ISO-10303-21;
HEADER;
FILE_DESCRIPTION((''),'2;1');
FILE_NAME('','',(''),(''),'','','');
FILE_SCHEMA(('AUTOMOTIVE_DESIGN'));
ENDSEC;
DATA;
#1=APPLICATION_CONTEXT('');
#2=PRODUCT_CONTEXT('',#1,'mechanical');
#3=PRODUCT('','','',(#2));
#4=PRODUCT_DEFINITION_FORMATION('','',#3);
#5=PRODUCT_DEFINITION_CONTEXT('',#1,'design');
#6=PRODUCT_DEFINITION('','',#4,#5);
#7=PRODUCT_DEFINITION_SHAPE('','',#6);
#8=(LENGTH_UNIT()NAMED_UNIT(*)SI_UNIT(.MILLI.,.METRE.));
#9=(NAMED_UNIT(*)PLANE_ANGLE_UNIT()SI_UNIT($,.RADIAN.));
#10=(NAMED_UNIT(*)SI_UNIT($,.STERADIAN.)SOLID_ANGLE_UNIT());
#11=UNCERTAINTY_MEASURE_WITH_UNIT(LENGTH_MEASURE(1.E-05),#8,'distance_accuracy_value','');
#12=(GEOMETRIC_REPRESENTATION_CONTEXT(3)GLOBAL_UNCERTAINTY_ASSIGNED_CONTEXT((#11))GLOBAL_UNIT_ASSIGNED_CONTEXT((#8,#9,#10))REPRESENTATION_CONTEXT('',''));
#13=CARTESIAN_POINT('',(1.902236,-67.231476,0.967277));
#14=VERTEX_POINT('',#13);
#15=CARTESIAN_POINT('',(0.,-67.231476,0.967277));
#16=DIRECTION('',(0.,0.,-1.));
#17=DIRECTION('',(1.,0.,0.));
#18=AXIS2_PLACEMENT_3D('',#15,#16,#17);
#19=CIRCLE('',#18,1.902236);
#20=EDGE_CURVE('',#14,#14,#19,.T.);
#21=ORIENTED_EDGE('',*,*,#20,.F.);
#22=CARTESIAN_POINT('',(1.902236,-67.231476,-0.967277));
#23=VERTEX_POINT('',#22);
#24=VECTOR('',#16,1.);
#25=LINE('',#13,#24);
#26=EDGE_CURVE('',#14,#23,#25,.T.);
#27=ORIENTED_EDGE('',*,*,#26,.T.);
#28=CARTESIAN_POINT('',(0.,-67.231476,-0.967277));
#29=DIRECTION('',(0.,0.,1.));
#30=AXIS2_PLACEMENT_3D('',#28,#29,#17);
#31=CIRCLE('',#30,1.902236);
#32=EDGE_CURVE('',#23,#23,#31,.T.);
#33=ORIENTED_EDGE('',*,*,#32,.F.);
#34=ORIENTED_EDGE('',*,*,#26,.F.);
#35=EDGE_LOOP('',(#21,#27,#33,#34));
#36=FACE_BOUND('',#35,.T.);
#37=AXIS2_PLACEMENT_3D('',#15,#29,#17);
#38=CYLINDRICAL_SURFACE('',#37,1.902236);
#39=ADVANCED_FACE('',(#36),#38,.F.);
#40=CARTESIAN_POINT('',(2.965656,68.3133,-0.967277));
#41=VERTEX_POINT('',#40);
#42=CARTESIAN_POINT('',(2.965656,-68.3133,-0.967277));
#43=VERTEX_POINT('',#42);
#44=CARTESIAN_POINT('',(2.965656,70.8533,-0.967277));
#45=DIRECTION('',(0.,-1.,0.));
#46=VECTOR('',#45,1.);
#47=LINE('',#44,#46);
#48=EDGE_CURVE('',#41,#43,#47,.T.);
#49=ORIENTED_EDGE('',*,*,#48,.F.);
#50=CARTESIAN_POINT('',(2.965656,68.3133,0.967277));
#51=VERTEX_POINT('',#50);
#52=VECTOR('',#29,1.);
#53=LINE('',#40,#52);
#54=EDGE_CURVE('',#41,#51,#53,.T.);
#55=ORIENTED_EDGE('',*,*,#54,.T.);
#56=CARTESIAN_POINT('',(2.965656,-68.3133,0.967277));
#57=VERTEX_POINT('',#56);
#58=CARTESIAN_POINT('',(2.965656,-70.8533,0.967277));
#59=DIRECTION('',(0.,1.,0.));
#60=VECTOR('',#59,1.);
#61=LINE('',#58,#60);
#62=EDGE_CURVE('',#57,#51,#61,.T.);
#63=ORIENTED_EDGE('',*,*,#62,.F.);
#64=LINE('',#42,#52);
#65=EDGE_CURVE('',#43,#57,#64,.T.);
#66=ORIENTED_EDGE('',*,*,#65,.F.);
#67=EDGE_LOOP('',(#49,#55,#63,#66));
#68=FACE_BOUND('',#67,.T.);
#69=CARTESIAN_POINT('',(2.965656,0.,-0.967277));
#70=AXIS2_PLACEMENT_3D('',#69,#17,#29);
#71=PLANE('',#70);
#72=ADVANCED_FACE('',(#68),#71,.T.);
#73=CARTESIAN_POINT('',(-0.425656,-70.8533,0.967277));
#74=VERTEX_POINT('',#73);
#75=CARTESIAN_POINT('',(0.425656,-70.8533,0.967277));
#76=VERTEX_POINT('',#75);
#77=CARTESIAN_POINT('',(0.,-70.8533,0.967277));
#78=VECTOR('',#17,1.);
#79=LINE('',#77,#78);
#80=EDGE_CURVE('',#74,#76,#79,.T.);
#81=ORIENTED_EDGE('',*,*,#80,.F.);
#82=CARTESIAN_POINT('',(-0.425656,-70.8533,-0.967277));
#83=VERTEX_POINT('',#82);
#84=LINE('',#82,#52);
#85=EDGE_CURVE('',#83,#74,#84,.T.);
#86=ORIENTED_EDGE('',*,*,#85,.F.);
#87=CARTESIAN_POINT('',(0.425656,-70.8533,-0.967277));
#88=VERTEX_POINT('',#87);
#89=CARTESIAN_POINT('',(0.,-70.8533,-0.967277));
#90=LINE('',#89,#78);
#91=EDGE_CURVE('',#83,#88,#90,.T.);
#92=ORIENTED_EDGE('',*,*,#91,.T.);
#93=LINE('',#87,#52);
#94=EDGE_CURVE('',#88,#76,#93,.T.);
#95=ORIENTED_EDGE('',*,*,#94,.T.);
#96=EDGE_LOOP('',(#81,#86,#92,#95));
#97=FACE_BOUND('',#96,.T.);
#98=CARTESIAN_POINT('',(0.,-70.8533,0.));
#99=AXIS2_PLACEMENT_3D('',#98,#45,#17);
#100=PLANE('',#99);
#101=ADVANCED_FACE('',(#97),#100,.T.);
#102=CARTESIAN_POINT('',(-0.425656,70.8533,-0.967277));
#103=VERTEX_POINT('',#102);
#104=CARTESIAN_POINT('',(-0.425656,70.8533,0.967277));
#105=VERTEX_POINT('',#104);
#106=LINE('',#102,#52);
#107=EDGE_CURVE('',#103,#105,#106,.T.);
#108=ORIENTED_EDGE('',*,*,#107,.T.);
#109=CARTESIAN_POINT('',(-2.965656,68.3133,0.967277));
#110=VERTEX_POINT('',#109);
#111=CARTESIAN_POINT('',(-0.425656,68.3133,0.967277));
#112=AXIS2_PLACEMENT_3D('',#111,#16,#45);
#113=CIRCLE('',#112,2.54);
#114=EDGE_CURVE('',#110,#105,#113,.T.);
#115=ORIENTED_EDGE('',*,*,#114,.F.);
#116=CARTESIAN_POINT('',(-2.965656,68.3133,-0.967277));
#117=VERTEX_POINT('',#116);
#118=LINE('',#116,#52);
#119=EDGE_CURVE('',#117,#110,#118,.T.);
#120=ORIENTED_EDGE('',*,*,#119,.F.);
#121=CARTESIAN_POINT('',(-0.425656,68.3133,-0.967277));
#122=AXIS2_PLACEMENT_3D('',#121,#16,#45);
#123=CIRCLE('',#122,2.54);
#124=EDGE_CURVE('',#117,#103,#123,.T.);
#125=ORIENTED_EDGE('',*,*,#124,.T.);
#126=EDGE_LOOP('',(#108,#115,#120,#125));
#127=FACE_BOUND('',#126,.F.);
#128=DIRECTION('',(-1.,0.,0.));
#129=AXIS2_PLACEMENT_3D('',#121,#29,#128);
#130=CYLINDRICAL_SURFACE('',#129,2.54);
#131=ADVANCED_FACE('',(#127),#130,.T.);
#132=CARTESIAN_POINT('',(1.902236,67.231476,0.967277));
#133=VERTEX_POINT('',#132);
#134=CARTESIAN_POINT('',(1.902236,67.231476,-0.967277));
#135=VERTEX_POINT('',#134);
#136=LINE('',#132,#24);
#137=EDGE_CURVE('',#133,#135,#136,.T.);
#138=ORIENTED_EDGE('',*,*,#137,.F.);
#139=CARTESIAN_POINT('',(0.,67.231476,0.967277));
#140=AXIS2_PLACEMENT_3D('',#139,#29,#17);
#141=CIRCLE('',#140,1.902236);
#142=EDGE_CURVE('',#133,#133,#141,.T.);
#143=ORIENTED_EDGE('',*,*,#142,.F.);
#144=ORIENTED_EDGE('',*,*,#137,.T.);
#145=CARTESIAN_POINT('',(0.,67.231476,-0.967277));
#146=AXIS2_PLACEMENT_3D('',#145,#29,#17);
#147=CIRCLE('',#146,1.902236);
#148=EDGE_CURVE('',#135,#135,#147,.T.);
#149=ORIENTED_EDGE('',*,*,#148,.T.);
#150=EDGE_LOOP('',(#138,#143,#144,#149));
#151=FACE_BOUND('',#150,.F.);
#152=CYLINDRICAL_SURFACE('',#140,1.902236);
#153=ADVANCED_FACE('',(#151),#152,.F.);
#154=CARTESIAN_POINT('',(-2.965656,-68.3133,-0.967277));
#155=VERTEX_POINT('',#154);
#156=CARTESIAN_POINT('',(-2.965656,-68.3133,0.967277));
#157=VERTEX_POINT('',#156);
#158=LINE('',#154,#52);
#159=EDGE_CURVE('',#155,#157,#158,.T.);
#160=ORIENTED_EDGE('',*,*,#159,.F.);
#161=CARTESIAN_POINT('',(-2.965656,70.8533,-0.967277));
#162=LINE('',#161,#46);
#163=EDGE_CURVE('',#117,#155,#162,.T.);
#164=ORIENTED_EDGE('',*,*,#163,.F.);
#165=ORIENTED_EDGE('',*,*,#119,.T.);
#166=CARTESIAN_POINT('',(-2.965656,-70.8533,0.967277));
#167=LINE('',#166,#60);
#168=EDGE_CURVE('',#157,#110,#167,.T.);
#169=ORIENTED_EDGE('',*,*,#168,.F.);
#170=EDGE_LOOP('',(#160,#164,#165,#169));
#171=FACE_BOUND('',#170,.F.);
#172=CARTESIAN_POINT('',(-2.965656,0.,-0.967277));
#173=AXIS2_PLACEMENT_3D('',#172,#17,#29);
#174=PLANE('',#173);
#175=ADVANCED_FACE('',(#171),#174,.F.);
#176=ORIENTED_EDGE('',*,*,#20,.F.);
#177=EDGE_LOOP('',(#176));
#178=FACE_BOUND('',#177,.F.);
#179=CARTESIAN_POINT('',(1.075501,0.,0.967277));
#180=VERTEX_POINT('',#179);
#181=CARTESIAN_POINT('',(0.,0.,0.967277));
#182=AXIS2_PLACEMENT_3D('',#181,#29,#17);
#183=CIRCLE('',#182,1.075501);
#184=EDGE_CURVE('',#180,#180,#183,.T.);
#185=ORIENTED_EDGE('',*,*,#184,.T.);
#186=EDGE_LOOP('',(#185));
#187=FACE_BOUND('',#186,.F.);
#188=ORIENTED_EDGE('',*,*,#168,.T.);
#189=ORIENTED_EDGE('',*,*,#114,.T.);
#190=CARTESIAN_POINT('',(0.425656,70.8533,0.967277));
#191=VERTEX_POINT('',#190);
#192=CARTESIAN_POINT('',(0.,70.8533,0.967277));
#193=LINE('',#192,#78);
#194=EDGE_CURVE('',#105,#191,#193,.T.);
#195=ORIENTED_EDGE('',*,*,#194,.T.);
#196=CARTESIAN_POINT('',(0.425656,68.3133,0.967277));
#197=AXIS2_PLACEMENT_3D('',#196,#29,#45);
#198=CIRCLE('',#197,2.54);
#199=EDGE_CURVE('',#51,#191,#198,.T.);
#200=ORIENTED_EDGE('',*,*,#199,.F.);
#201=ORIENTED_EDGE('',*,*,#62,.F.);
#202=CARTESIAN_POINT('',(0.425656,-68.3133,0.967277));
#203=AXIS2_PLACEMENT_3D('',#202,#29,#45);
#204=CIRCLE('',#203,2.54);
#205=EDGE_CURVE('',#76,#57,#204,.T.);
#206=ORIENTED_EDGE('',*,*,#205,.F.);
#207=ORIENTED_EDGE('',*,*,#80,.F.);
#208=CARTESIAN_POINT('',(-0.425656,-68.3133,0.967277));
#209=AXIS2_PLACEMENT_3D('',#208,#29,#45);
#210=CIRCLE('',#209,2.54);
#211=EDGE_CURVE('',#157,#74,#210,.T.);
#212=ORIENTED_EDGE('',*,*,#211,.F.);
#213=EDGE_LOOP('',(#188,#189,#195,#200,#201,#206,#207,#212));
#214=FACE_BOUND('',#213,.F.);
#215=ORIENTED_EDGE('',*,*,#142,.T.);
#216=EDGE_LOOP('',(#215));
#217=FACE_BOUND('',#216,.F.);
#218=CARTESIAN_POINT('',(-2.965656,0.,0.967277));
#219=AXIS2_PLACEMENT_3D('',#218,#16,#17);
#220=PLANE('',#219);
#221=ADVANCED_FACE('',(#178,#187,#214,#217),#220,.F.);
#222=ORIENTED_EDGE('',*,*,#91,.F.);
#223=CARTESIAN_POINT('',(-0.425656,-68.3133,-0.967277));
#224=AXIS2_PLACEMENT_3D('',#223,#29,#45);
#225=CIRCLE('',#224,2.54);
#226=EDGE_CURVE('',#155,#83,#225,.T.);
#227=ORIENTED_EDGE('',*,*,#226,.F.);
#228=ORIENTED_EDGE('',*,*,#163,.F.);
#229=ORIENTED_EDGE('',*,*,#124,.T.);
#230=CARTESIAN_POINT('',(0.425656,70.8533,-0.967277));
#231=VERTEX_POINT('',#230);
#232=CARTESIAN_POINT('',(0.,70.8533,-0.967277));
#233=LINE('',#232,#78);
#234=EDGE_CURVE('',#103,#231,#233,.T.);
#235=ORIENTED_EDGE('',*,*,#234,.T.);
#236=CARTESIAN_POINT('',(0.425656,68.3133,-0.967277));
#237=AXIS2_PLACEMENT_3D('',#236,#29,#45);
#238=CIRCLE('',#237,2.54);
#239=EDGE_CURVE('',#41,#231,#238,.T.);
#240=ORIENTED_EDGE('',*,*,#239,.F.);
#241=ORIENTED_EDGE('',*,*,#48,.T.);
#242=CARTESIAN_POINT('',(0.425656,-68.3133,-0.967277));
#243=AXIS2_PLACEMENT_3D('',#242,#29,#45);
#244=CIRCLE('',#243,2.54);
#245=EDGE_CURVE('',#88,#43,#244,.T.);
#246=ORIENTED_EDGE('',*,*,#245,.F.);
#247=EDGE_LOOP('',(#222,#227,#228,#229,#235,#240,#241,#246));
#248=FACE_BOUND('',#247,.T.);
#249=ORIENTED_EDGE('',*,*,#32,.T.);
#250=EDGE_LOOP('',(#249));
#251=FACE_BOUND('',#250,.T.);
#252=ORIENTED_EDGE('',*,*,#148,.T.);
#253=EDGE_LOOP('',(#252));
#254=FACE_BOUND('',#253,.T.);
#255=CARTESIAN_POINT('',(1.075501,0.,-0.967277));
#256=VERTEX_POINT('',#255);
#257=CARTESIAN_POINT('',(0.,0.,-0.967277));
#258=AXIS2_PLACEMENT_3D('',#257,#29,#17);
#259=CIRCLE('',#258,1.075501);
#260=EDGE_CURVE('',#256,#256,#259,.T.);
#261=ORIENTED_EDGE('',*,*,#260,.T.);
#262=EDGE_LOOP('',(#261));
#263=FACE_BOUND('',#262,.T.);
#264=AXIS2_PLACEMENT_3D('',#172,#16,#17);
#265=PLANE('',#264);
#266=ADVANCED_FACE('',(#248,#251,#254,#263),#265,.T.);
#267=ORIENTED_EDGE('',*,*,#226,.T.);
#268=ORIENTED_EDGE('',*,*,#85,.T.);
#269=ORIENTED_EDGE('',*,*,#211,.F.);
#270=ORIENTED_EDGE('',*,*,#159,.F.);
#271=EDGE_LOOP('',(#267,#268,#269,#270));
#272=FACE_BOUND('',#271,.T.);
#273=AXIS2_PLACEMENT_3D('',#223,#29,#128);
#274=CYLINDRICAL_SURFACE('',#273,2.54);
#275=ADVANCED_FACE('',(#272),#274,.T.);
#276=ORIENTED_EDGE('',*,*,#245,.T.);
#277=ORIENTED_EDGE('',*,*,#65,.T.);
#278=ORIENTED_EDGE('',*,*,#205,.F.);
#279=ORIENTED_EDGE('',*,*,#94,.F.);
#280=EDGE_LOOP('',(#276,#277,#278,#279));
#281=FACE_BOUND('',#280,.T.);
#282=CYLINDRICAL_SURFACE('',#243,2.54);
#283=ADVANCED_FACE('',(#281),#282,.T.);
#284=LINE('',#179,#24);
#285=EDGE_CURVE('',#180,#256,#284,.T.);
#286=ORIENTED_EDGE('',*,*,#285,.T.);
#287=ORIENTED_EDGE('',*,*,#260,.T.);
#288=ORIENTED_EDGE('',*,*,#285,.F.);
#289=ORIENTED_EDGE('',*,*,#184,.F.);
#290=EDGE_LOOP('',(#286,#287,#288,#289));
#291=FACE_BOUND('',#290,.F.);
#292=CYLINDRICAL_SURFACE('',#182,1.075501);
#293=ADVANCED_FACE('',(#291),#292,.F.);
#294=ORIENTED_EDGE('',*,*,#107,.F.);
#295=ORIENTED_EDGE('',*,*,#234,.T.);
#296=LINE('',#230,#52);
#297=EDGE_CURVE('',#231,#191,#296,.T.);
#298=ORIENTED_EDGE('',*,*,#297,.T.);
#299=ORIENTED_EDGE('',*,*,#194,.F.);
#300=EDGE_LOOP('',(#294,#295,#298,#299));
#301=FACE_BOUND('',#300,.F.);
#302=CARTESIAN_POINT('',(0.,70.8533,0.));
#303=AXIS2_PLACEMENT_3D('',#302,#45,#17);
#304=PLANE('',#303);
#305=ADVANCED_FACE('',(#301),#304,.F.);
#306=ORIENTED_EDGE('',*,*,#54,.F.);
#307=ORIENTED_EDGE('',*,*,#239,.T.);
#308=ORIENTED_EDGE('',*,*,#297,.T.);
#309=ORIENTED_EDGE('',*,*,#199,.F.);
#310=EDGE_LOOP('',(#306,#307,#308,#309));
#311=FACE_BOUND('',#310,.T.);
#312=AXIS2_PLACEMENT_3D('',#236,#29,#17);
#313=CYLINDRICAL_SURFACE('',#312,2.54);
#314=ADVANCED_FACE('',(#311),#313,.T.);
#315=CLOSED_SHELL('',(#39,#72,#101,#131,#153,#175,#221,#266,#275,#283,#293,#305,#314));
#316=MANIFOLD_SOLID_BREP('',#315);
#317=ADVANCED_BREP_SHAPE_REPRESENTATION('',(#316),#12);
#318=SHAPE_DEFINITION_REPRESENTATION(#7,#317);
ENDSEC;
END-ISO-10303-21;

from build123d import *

# Parameters (mm, degrees)
F0_W          = 5.9313117526
F0_H          = 1.9345532637
F1_DEPTH      = 70.8533
F1_DEPTH_BACK = 70.8533
F2_R          = 2.54
F3_R          = 1.9022356475
F4_DEPTH      = 2.3622
F5_R          = 1.0755010134
F6_DEPTH      = 2.01676


# Not quite as in the source:
# - a pattern or mirror of a feature is missing from the dataset's text; its kind, count and spacing are read off the source's solid


with BuildPart() as f1:
    # F0 (on Front) → F1 (new body, two sides)
    with BuildSketch(Plane.XZ) as f1_sk:
        Rectangle(F0_W, F0_H)
    extrude(amount=F1_DEPTH)
    extrude(f1_sk.sketch, amount=-F1_DEPTH_BACK)

    # F2
    f2_edges = [f1.edges().sort_by_distance(p)[0] for p in [
        (2.965656, -70.8533, 0),
        (-2.965656, -70.8533, 0),
        (2.965656, 70.8533, 0),
        (-2.965656, 70.8533, 0),
    ]]
    fillet(f2_edges, radius=F2_R)

    # F3 (on face) → F4 (cut)
    with BuildSketch(Plane.XY.offset(0.9672766319)):
        with Locations((0, 67.2314763069)):
            Circle(F3_R)
    f4 = extrude(amount=-F4_DEPTH, mode=Mode.SUBTRACT)

    # F4_copies: F4 across plane
    add(f4.mirror(Plane(origin=(0, 0, 0), x_dir=(0, 0, -1), z_dir=(0, -1, 0))), mode=Mode.SUBTRACT)

    # F5 (on face) → F6 (cut)
    with BuildSketch(Plane.XY.offset(0.9672766319)):
        Circle(F5_R)
    extrude(amount=-F6_DEPTH, mode=Mode.SUBTRACT)


solid = f1.part
